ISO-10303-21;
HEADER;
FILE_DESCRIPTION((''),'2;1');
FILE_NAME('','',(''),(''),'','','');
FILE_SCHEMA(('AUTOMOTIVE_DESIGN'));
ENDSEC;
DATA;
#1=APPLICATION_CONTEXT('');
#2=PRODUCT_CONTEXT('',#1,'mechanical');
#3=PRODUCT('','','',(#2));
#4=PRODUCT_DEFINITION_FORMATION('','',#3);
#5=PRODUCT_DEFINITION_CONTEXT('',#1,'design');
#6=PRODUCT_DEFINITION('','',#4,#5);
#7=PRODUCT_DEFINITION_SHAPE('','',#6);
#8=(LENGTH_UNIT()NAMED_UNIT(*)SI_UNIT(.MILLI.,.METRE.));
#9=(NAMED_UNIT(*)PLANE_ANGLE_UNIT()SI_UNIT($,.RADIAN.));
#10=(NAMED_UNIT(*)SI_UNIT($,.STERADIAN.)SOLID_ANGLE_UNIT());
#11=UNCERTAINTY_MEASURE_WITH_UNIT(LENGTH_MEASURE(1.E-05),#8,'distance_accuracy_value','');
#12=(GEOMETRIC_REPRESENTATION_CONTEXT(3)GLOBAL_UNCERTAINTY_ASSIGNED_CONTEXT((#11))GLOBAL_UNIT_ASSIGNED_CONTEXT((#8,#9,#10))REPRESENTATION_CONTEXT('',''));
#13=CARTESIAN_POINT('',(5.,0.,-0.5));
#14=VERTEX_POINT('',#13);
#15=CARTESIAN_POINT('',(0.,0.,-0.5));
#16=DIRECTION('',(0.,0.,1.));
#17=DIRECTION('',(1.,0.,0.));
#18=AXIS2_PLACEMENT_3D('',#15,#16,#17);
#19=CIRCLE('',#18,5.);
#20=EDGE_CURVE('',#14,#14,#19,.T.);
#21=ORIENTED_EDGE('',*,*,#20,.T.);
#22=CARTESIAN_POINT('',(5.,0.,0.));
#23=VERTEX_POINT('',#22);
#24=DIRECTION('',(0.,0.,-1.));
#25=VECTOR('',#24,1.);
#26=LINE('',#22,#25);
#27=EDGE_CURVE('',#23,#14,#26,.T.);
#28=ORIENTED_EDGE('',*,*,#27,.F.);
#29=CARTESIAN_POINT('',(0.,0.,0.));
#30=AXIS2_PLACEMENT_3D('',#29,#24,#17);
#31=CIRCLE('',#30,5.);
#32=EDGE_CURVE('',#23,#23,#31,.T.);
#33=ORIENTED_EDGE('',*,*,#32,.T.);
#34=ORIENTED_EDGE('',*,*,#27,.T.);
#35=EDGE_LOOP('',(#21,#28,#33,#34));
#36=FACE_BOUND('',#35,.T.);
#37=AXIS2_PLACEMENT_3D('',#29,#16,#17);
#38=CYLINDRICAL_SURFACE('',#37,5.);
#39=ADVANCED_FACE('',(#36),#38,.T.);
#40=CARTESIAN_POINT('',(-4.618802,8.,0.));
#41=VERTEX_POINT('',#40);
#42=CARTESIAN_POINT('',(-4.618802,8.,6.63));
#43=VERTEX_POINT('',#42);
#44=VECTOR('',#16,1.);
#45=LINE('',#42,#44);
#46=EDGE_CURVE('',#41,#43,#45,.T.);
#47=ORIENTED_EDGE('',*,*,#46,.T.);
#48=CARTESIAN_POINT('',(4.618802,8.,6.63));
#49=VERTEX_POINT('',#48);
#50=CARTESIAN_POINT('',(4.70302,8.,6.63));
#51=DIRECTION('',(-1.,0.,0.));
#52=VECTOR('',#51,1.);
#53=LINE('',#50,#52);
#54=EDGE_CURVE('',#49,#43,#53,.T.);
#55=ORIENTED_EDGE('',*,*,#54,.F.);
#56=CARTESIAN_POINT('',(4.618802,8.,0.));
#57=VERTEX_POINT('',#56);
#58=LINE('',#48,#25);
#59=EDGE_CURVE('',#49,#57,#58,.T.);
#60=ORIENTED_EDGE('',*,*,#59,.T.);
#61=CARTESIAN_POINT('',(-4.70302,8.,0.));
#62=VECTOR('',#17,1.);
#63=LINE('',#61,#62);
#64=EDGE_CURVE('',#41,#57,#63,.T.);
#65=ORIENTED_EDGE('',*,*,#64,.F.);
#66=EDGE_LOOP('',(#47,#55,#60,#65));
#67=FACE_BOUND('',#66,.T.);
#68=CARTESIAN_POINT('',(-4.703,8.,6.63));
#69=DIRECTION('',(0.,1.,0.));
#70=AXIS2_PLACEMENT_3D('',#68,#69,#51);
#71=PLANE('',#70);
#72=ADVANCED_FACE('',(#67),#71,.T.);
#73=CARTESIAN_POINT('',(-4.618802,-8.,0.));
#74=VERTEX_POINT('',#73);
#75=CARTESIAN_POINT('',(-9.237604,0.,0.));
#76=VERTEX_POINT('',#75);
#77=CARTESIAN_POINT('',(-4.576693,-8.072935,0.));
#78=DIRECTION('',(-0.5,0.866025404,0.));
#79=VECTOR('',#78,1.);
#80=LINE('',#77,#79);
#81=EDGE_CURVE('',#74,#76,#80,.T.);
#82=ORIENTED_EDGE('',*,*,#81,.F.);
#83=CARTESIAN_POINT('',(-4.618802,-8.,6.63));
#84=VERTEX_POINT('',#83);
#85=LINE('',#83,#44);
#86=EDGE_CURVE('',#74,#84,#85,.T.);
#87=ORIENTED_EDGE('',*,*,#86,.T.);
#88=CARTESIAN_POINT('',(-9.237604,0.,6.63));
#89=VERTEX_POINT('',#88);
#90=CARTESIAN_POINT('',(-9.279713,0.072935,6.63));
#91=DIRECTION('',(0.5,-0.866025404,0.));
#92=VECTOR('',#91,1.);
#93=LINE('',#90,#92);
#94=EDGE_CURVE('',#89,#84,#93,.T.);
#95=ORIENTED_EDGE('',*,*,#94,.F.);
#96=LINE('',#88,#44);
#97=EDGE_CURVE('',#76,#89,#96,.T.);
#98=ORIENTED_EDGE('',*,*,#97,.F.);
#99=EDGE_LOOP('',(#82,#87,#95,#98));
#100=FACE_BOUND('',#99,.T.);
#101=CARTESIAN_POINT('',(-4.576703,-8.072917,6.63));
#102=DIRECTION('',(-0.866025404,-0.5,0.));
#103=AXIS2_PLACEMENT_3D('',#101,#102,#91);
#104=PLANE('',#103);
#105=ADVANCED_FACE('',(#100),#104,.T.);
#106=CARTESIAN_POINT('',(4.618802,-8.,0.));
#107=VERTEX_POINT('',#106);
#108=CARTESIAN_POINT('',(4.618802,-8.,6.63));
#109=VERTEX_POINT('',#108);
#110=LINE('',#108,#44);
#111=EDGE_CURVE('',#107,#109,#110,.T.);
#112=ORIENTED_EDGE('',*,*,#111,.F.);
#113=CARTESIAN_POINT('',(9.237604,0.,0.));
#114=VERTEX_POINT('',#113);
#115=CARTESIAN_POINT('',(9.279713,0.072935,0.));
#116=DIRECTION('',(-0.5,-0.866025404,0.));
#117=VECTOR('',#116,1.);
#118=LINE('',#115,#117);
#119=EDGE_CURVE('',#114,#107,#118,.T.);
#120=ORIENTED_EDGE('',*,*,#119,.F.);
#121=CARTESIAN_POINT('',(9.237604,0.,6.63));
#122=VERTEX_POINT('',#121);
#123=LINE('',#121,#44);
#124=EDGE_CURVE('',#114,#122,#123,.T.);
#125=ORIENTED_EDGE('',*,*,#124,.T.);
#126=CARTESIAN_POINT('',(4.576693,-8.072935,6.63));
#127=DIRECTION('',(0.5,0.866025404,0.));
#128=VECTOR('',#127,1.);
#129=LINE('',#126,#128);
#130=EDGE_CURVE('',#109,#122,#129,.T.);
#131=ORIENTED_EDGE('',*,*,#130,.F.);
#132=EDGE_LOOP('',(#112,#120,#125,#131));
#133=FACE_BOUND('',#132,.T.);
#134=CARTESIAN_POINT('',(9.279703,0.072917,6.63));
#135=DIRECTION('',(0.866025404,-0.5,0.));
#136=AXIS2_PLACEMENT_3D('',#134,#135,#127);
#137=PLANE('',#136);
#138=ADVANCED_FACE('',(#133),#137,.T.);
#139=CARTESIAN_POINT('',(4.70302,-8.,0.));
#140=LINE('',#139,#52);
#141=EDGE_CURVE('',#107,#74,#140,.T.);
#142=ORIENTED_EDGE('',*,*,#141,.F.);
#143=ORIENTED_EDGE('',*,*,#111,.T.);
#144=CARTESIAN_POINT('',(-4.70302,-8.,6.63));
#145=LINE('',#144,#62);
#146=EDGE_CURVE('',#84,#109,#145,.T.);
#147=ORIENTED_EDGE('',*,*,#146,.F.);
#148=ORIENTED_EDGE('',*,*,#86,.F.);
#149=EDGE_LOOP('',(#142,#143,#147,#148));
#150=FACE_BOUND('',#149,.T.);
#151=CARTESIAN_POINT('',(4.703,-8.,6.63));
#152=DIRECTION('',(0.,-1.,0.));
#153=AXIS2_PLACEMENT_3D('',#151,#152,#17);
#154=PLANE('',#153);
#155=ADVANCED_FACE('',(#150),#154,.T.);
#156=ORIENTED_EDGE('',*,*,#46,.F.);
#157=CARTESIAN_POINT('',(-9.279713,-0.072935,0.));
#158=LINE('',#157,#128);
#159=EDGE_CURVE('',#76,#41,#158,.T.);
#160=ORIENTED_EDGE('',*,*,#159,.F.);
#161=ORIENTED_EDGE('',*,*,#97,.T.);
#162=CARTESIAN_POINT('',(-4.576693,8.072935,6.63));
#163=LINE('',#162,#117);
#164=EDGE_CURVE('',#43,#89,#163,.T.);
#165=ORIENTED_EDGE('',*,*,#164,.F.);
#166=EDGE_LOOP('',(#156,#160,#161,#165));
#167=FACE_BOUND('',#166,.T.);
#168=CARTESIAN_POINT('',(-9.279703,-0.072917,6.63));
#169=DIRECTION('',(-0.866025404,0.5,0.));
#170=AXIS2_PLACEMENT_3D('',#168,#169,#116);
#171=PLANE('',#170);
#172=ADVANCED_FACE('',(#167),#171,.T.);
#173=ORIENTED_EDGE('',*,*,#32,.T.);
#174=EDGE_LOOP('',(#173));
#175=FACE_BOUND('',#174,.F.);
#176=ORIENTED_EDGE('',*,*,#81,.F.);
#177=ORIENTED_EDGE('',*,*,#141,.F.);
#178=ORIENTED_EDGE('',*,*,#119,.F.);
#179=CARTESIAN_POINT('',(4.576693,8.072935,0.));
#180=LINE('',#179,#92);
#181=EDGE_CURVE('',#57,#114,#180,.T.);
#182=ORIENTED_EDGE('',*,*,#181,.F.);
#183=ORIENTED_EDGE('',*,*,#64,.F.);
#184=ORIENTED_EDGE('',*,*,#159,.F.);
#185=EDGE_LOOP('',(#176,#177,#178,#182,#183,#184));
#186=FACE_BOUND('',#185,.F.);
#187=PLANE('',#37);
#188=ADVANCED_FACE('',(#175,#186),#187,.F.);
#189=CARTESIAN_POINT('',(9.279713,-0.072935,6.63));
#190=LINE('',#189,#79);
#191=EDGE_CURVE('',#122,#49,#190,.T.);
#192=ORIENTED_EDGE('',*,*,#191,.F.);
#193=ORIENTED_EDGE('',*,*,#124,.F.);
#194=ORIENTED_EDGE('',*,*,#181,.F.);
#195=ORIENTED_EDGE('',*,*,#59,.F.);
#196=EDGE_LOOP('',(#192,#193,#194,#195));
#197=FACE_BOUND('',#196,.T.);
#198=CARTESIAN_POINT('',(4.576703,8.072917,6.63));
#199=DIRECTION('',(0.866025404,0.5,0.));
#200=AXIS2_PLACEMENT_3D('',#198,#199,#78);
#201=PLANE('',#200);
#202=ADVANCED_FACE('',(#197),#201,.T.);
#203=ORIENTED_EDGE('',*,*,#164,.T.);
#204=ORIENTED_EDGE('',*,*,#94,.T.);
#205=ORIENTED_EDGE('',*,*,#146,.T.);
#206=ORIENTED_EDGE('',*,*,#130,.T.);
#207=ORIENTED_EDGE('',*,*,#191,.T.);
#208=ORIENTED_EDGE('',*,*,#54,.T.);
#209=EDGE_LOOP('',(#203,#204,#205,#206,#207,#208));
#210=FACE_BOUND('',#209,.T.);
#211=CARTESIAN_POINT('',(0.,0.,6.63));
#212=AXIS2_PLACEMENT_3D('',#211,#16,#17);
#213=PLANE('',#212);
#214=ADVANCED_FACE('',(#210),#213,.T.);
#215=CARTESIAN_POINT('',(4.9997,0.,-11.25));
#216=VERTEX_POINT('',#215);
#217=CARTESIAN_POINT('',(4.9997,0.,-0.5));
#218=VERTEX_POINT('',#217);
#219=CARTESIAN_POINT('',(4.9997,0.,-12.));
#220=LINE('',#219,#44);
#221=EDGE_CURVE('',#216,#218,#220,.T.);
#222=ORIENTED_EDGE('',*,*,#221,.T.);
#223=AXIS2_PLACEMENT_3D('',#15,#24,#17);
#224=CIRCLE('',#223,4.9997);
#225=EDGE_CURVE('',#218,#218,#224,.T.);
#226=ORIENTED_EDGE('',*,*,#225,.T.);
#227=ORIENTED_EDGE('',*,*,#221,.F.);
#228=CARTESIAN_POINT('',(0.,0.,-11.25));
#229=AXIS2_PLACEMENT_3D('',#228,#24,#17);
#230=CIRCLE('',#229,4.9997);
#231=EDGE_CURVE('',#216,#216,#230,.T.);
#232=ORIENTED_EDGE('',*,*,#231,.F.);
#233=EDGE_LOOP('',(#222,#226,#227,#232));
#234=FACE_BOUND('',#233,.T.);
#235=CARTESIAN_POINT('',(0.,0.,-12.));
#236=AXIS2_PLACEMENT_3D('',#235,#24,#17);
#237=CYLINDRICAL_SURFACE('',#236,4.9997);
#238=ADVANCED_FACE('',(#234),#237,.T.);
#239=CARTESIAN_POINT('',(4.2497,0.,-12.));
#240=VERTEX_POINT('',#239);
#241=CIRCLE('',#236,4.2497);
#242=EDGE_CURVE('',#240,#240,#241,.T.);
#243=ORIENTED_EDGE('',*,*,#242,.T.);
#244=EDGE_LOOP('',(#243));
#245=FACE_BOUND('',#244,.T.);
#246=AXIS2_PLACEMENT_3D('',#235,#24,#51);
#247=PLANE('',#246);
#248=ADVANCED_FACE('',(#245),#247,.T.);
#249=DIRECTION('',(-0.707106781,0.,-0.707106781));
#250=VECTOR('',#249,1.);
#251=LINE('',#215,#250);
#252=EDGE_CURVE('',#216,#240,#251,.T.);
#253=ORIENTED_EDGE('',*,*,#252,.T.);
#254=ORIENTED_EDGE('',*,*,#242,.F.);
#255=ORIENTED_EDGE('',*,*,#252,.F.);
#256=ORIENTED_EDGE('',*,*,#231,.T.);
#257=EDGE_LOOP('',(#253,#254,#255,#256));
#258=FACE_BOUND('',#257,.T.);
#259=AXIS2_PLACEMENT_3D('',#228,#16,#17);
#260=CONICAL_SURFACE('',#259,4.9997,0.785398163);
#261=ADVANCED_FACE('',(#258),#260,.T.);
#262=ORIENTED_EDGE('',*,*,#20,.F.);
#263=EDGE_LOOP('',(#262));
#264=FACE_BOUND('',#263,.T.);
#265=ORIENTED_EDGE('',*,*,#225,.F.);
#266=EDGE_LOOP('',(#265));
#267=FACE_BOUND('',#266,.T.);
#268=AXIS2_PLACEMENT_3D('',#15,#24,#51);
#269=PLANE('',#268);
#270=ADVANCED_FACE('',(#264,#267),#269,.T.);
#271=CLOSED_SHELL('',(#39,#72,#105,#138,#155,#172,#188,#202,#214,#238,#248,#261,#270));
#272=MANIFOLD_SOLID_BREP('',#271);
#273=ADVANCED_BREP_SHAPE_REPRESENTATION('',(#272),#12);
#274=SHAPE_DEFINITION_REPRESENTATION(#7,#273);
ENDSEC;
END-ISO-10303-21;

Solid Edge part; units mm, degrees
sketch "Sketch1" plane through (0, 0, 0) normal (0, 0, 1) x (1, 0, 0)
  circle A0 centre (0, 0) radius 9.28
  dimension "D1" = 18.56
extrude "Protrusion1" add sketch "Sketch1" along normal blind 6.63
sketch "Sketch2" plane through (0, 0, 0) normal (0, 0, -1) x (1, 0, 0)
  circle A0 centre (0, 0) radius 5
extrude "Protrusion2" add sketch "Sketch2" along normal blind 12
sketch "Sketch3" plane through (0, 0, -12) normal (0, 0, -1) x (1, 0, 0)
  circle A0 centre (0, 0) radius 4.9997
extrude "Cutout1" cut sketch "Sketch3" against normal blind 11.5 flip side to cut
chamfer "Chamfer_1" distance 0.75 angle 45 1 edges at (-4.9997, 0, -12)
sketch "Sketch4" plane through (0, 0, 6.63) normal (0, 0, 1) x (1, 0, 0)
  line L0 (-4.703, 8) -> (4.703, 8)
  dimension "D1" = 16
extrude "Cutout2" cut sketch "Sketch4" against normal up to next material side at (0, 8.05, 6.63)
pattern_circular "Pattern1" count 6 over 360 about axis through (0, 0, 6.63) along (0, 0, 1) of "Cutout2"
properties part number "24104681"
